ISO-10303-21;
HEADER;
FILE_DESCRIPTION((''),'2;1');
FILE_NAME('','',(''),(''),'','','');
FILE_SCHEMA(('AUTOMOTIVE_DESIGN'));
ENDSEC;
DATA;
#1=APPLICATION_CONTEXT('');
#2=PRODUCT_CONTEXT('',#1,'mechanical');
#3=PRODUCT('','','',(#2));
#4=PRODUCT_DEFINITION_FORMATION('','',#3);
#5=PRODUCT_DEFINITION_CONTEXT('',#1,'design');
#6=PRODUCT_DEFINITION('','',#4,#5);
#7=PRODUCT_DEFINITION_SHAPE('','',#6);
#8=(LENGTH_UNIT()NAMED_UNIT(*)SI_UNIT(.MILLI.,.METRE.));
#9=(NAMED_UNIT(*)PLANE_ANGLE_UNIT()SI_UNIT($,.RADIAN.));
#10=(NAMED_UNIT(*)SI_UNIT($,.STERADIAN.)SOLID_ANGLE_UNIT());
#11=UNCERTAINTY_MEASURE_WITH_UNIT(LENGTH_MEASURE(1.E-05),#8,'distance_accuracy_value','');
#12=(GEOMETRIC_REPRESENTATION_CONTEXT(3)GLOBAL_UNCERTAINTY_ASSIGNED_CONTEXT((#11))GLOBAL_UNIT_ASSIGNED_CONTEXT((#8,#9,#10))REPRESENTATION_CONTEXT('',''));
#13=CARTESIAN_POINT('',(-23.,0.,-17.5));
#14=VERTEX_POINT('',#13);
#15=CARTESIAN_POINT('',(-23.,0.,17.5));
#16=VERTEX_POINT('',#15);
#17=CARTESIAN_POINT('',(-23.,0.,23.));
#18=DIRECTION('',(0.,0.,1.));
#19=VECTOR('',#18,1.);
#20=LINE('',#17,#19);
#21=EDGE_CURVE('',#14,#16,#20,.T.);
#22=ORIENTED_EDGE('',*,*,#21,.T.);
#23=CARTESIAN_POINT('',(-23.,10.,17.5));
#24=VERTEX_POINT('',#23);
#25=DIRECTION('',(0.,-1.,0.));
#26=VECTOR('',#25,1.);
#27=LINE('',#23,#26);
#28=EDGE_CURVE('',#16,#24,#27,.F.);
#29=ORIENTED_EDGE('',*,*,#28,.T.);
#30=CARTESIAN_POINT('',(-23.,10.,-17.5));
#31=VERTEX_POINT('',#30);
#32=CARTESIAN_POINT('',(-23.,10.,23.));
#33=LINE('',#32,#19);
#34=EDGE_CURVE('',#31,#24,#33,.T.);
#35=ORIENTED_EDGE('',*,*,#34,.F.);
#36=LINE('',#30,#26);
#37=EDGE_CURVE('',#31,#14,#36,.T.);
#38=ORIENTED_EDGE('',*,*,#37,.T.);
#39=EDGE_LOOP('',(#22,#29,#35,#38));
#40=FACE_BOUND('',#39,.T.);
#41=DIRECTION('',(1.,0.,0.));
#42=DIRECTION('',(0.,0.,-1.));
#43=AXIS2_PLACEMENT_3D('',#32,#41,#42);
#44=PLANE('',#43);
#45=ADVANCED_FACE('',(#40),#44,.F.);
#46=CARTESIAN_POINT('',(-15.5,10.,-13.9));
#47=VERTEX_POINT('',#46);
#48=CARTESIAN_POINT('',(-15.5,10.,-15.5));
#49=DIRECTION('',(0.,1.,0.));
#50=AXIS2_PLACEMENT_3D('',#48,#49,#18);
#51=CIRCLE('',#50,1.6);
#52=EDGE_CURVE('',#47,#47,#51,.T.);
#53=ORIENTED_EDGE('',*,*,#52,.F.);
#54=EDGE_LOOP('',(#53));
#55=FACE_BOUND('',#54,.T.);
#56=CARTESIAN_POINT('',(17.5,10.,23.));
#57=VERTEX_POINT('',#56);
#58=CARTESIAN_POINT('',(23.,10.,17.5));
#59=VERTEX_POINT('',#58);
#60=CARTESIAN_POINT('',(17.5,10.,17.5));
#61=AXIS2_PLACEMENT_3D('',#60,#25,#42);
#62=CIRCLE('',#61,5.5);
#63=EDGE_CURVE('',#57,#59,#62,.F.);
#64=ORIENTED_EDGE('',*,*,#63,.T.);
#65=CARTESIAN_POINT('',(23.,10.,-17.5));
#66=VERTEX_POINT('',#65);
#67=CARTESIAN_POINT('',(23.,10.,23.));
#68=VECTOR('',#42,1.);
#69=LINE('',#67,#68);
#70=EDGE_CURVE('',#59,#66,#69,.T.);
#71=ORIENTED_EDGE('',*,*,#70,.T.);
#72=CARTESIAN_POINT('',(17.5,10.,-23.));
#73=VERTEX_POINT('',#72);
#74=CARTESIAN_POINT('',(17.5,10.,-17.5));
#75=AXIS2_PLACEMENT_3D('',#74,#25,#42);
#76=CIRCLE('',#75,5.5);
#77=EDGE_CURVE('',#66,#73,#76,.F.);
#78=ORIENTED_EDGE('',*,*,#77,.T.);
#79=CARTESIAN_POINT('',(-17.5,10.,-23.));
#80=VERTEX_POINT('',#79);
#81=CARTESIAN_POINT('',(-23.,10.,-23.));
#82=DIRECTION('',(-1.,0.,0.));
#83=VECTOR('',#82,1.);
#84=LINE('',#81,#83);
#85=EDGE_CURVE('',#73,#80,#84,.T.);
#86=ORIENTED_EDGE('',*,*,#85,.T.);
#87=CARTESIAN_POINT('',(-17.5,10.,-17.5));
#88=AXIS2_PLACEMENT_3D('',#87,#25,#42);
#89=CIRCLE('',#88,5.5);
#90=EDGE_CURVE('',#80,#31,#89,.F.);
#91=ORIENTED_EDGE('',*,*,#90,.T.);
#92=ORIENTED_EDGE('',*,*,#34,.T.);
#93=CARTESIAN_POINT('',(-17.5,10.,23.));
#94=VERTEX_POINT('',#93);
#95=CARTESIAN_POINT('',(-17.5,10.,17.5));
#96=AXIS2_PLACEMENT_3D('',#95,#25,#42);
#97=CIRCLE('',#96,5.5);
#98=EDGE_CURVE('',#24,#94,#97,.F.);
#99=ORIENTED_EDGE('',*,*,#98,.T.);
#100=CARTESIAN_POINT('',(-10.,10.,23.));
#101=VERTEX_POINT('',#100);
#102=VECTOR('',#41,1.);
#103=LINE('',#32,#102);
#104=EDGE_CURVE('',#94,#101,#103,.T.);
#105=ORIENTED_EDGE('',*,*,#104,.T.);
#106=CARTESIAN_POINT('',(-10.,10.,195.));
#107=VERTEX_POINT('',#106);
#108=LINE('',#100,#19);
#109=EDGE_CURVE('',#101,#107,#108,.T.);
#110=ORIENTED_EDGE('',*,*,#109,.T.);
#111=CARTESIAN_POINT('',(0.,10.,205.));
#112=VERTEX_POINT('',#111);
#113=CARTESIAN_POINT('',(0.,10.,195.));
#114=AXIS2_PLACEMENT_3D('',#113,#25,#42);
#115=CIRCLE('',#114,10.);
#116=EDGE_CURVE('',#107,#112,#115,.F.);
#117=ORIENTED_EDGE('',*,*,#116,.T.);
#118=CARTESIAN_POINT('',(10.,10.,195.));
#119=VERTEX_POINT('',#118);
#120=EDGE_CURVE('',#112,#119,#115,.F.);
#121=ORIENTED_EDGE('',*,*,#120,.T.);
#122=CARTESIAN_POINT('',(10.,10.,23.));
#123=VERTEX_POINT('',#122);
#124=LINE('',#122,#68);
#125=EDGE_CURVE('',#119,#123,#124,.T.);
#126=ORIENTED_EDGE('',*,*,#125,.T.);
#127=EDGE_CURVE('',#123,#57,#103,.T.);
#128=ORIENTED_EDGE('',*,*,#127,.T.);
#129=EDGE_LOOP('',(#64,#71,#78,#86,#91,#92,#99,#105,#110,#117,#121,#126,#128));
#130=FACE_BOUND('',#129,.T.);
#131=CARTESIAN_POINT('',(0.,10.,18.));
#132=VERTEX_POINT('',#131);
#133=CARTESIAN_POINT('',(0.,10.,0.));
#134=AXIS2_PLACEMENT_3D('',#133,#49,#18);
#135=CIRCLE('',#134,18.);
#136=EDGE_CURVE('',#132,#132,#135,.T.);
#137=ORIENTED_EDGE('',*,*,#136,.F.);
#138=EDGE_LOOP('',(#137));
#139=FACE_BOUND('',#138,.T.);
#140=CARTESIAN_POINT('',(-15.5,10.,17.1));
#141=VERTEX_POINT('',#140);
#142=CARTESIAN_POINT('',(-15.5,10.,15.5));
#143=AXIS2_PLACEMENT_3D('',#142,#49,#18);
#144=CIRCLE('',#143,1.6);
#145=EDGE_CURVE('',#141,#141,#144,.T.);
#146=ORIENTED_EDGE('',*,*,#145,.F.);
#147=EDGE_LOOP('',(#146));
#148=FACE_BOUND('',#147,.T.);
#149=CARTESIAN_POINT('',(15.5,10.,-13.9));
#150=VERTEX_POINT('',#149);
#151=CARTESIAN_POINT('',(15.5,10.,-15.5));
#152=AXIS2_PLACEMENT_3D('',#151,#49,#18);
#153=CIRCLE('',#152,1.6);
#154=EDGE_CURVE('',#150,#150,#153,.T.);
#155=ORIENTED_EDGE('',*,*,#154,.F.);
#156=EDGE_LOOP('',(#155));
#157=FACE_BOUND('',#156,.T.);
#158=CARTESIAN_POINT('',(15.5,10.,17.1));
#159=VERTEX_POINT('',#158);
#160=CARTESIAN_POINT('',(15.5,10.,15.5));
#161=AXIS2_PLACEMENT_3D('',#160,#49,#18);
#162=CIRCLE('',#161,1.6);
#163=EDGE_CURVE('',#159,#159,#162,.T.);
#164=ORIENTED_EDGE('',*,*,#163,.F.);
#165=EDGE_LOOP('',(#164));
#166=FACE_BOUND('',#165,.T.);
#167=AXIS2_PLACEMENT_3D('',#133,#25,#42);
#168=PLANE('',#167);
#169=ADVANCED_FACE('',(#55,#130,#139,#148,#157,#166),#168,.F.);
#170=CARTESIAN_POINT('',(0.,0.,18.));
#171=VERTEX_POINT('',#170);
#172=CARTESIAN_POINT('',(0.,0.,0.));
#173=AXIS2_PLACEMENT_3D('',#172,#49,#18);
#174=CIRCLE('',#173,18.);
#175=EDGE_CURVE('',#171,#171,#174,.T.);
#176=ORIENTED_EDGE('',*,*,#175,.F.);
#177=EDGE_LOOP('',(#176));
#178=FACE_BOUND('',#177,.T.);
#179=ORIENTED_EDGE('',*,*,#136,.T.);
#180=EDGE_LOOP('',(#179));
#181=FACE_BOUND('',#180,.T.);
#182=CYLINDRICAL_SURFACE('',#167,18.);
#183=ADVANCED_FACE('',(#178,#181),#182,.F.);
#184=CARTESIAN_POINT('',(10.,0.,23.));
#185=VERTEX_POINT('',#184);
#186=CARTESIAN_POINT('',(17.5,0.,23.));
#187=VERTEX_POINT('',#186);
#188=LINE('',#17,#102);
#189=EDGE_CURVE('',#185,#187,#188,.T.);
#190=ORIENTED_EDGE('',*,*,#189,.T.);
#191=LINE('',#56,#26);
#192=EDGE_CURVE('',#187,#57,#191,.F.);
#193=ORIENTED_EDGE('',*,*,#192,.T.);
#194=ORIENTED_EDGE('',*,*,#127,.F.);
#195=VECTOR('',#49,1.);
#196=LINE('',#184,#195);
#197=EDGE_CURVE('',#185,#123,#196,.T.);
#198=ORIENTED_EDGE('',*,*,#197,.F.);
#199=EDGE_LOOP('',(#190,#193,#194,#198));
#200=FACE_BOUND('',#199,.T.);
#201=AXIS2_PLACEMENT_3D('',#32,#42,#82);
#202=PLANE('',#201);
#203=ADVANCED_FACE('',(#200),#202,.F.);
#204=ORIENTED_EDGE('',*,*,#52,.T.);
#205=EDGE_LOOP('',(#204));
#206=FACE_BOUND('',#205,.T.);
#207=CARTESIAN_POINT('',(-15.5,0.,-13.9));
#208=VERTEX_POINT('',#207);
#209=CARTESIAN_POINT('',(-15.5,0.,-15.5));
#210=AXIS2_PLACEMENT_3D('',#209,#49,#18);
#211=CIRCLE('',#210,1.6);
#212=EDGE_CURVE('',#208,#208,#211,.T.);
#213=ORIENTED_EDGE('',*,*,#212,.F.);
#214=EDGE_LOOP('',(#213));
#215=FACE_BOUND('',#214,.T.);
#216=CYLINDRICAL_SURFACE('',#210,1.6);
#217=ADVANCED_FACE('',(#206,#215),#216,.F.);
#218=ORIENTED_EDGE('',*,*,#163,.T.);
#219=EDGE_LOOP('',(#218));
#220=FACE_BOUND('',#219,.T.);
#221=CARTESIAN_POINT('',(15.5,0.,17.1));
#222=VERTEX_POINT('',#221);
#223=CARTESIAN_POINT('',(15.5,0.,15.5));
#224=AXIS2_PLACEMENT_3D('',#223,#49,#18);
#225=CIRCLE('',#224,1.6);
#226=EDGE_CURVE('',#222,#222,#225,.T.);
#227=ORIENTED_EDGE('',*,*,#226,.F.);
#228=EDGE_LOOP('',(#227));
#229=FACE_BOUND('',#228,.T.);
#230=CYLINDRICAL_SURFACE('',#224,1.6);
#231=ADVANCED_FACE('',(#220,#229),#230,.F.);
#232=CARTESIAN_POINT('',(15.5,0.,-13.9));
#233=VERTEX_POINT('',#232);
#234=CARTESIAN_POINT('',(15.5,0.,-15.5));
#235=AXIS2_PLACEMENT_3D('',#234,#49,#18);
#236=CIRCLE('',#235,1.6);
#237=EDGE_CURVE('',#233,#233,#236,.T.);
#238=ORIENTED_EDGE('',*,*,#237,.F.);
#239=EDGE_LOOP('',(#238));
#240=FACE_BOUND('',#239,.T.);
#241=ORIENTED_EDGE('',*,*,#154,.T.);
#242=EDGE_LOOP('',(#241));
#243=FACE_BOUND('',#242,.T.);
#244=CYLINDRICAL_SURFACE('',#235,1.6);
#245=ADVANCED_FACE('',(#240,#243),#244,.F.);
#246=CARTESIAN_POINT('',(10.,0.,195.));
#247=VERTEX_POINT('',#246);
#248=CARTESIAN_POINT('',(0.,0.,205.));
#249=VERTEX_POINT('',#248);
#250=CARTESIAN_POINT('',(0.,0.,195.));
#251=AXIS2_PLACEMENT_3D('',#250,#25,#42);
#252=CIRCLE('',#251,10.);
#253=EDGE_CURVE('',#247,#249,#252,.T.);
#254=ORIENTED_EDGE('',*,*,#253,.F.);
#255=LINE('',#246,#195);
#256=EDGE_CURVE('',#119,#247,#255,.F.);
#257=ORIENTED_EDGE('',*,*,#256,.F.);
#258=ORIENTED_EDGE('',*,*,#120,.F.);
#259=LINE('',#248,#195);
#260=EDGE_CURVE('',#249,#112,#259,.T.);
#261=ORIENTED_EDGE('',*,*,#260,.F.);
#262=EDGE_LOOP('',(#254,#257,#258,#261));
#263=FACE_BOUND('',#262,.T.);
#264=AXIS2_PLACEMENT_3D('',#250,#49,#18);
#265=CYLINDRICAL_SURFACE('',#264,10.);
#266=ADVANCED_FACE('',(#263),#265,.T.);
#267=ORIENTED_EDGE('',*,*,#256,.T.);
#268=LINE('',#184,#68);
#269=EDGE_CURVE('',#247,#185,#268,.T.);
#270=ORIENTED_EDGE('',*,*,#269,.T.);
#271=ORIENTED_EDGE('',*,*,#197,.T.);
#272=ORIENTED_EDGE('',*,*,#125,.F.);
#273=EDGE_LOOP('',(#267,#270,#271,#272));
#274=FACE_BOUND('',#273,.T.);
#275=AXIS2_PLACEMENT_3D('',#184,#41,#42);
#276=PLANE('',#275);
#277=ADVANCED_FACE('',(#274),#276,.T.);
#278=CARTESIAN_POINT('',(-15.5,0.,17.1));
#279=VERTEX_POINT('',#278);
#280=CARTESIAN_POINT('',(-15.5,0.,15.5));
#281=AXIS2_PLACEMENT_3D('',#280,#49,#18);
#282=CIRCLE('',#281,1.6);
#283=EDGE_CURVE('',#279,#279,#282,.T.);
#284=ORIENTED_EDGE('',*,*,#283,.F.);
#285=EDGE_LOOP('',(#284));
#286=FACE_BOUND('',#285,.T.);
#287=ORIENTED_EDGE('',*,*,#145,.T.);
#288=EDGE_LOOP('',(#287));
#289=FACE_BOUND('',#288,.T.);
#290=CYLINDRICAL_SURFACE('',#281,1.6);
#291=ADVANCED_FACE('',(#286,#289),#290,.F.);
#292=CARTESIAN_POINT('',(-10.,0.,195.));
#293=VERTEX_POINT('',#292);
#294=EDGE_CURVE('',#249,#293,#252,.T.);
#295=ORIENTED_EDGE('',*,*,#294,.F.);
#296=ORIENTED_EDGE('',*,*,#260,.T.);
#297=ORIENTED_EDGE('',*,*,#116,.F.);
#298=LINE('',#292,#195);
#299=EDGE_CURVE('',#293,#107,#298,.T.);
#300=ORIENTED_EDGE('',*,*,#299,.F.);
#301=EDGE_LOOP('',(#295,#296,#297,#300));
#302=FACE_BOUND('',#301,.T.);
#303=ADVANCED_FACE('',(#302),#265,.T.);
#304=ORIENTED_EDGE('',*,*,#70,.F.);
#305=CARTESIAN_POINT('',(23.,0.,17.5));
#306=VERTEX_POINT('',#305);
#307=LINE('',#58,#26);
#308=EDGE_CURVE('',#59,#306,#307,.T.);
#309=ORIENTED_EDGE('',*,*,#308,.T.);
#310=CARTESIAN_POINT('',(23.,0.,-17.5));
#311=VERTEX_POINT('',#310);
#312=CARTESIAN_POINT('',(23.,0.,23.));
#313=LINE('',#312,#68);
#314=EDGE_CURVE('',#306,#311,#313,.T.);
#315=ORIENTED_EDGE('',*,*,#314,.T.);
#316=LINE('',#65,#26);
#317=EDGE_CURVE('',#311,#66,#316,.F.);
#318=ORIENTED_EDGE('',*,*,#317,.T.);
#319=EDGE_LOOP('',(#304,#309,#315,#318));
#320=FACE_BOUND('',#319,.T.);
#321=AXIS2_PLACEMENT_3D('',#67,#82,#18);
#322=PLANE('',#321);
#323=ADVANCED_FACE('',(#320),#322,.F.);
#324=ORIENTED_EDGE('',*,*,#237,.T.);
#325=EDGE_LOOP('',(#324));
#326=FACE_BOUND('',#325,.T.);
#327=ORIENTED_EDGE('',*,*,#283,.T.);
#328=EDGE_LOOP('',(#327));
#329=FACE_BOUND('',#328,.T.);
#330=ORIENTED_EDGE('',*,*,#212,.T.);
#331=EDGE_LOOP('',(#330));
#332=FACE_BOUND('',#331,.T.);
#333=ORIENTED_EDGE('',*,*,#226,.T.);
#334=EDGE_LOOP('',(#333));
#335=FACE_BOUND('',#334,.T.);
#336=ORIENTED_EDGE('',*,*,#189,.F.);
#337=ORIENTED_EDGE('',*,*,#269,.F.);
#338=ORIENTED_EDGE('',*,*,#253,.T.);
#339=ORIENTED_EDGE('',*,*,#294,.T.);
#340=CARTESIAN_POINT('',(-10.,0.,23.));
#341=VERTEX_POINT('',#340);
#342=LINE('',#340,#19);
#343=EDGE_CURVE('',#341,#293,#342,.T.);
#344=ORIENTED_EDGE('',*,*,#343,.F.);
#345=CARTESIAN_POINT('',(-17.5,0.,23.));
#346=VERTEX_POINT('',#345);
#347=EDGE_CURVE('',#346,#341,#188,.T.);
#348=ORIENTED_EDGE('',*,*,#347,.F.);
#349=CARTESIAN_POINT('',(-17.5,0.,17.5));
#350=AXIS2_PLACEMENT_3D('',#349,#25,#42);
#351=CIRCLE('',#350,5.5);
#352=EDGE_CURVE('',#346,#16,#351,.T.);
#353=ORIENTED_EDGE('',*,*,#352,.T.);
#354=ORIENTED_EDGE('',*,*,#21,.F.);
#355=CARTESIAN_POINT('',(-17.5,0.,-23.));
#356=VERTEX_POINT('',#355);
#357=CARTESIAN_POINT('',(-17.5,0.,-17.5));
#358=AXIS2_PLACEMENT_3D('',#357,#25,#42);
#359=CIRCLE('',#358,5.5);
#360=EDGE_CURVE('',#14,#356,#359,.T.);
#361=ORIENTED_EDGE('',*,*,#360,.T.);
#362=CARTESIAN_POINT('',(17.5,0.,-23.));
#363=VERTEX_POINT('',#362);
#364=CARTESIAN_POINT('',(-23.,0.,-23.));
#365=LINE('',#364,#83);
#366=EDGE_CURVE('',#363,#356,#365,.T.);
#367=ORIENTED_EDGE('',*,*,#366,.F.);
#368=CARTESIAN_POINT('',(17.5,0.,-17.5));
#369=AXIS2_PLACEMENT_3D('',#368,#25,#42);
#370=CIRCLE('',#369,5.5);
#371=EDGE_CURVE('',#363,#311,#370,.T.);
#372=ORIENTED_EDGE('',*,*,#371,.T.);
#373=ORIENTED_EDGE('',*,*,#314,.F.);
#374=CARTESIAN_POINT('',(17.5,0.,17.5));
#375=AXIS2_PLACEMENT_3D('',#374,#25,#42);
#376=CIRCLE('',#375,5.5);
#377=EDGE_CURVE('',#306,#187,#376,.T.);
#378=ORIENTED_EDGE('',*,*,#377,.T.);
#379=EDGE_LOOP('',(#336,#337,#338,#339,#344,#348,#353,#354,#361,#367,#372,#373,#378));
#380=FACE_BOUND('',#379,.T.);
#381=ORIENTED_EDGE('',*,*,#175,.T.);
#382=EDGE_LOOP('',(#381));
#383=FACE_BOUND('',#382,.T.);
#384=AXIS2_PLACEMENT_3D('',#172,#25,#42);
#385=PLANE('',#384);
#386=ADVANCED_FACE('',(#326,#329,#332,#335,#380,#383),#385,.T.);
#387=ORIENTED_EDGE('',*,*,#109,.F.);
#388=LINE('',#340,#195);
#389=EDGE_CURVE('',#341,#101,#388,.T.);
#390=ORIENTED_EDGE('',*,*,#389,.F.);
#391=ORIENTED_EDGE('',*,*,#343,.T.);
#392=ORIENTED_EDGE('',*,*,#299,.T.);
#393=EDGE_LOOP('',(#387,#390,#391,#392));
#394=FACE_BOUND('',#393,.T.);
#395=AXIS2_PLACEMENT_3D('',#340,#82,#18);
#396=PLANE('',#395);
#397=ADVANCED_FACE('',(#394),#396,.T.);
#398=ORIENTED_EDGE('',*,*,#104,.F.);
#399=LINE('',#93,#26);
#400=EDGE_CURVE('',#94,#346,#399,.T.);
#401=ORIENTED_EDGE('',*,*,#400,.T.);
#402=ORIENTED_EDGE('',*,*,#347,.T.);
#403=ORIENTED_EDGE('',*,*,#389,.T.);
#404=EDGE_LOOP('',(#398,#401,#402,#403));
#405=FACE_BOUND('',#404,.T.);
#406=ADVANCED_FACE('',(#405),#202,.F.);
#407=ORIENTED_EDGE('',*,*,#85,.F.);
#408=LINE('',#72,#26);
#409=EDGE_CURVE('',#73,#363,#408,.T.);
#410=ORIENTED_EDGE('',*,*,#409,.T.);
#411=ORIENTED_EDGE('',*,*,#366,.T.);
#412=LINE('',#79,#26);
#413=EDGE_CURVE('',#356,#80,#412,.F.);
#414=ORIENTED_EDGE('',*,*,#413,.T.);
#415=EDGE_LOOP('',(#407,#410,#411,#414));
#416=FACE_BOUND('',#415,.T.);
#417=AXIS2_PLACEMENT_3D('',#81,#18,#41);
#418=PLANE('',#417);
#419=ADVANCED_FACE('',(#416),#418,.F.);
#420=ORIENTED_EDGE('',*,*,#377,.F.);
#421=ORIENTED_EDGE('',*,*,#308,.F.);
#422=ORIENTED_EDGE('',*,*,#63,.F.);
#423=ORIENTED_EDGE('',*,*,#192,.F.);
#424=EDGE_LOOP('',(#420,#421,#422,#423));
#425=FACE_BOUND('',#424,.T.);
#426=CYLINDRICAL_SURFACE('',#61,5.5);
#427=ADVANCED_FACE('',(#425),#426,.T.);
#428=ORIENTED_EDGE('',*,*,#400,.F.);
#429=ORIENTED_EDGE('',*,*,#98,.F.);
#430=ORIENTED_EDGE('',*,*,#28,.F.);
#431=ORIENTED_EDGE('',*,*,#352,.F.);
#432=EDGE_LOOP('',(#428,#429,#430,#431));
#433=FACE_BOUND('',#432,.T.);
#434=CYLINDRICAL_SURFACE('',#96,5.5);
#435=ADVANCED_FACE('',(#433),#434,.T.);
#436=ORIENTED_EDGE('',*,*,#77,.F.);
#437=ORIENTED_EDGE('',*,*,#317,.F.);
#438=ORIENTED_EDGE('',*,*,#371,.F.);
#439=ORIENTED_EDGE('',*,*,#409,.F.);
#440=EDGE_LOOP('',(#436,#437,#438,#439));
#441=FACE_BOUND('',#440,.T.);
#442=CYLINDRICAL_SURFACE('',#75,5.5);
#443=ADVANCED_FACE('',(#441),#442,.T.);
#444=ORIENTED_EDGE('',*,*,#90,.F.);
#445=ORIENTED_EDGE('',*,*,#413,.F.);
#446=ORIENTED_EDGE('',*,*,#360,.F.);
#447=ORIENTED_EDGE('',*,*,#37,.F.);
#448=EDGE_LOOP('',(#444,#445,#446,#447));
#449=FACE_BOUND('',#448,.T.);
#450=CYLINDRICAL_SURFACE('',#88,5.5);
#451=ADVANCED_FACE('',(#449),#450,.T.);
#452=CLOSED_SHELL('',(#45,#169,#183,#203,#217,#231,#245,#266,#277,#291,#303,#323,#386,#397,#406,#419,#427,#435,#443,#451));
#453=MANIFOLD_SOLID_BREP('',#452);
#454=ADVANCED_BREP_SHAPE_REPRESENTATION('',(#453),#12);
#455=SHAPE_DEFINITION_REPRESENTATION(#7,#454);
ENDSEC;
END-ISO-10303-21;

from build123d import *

# Parameters (mm, degrees)
SKETCH_2_W          = 46
SKETCH_2_H          = 46
SKETCH_2_R          = 18
EXTRUDE_1_DEPTH     = 10
FILLET_1_R          = 5.5
SKETCH_3_R          = 1.6
CUT_EXTRUDE_1_DEPTH = 35.029399054
SKETCH_4_W          = 20
SKETCH_4_H          = 182
EXTRUDE_2_DEPTH     = 10
FILLET_2_R          = 10


with BuildPart() as part:
    # 草图2 → 凸台-拉伸1 (new body)
    with BuildSketch(Plane(origin=(0, 0, 0), x_dir=(1, 0, 0), z_dir=(0, 1, 0))):
        Rectangle(SKETCH_2_W, SKETCH_2_H)
        with Locations(Location((0, 0, 0), (0, 0, 270))):
            Circle(SKETCH_2_R, mode=Mode.SUBTRACT)
    extrude(amount=EXTRUDE_1_DEPTH)

    # 圆角1
    fillet_1_edges = [part.edges().sort_by_distance(p)[0] for p in [
        (23, 5, 23),
        (-23, 5, 23),
        (-23, 5, -23),
        (23, 5, -23),
    ]]
    fillet(fillet_1_edges, radius=FILLET_1_R)

    # 草图3 → 切除-拉伸1 (cut, through all)
    with BuildSketch(Plane(origin=(0, 10, 0), x_dir=(1, 0, 0), z_dir=(0, 1, 0))):
        with Locations(Location((-15.5, 15.5, 0), (0, 0, 270))):
            Circle(SKETCH_3_R)
        with Locations(Location((15.5, 15.5, 0), (0, 0, 270))):
            Circle(SKETCH_3_R)
        with Locations(Location((-15.5, -15.5, 0), (0, 0, 270))):
            Circle(SKETCH_3_R)
        with Locations(Location((15.5, -15.5, 0), (0, 0, 270))):
            Circle(SKETCH_3_R)
    extrude(amount=-CUT_EXTRUDE_1_DEPTH, mode=Mode.SUBTRACT)

    # 草图4 → 凸台-拉伸2 (add)
    with BuildSketch(Plane(origin=(0, 10, 0), x_dir=(1, 0, 0), z_dir=(0, 1, 0))):
        with Locations((0, -114)):
            Rectangle(SKETCH_4_W, SKETCH_4_H)
    extrude(amount=-EXTRUDE_2_DEPTH)

    # 圆角2
    fillet_2_edges = [part.edges().sort_by_distance(p)[0] for p in [
        (-10, 5, 205),
        (10, 5, 205),
    ]]
    fillet(fillet_2_edges, radius=FILLET_2_R - 0.0001)  # a hair under: the kernel refuses the full size


solid = part.part
